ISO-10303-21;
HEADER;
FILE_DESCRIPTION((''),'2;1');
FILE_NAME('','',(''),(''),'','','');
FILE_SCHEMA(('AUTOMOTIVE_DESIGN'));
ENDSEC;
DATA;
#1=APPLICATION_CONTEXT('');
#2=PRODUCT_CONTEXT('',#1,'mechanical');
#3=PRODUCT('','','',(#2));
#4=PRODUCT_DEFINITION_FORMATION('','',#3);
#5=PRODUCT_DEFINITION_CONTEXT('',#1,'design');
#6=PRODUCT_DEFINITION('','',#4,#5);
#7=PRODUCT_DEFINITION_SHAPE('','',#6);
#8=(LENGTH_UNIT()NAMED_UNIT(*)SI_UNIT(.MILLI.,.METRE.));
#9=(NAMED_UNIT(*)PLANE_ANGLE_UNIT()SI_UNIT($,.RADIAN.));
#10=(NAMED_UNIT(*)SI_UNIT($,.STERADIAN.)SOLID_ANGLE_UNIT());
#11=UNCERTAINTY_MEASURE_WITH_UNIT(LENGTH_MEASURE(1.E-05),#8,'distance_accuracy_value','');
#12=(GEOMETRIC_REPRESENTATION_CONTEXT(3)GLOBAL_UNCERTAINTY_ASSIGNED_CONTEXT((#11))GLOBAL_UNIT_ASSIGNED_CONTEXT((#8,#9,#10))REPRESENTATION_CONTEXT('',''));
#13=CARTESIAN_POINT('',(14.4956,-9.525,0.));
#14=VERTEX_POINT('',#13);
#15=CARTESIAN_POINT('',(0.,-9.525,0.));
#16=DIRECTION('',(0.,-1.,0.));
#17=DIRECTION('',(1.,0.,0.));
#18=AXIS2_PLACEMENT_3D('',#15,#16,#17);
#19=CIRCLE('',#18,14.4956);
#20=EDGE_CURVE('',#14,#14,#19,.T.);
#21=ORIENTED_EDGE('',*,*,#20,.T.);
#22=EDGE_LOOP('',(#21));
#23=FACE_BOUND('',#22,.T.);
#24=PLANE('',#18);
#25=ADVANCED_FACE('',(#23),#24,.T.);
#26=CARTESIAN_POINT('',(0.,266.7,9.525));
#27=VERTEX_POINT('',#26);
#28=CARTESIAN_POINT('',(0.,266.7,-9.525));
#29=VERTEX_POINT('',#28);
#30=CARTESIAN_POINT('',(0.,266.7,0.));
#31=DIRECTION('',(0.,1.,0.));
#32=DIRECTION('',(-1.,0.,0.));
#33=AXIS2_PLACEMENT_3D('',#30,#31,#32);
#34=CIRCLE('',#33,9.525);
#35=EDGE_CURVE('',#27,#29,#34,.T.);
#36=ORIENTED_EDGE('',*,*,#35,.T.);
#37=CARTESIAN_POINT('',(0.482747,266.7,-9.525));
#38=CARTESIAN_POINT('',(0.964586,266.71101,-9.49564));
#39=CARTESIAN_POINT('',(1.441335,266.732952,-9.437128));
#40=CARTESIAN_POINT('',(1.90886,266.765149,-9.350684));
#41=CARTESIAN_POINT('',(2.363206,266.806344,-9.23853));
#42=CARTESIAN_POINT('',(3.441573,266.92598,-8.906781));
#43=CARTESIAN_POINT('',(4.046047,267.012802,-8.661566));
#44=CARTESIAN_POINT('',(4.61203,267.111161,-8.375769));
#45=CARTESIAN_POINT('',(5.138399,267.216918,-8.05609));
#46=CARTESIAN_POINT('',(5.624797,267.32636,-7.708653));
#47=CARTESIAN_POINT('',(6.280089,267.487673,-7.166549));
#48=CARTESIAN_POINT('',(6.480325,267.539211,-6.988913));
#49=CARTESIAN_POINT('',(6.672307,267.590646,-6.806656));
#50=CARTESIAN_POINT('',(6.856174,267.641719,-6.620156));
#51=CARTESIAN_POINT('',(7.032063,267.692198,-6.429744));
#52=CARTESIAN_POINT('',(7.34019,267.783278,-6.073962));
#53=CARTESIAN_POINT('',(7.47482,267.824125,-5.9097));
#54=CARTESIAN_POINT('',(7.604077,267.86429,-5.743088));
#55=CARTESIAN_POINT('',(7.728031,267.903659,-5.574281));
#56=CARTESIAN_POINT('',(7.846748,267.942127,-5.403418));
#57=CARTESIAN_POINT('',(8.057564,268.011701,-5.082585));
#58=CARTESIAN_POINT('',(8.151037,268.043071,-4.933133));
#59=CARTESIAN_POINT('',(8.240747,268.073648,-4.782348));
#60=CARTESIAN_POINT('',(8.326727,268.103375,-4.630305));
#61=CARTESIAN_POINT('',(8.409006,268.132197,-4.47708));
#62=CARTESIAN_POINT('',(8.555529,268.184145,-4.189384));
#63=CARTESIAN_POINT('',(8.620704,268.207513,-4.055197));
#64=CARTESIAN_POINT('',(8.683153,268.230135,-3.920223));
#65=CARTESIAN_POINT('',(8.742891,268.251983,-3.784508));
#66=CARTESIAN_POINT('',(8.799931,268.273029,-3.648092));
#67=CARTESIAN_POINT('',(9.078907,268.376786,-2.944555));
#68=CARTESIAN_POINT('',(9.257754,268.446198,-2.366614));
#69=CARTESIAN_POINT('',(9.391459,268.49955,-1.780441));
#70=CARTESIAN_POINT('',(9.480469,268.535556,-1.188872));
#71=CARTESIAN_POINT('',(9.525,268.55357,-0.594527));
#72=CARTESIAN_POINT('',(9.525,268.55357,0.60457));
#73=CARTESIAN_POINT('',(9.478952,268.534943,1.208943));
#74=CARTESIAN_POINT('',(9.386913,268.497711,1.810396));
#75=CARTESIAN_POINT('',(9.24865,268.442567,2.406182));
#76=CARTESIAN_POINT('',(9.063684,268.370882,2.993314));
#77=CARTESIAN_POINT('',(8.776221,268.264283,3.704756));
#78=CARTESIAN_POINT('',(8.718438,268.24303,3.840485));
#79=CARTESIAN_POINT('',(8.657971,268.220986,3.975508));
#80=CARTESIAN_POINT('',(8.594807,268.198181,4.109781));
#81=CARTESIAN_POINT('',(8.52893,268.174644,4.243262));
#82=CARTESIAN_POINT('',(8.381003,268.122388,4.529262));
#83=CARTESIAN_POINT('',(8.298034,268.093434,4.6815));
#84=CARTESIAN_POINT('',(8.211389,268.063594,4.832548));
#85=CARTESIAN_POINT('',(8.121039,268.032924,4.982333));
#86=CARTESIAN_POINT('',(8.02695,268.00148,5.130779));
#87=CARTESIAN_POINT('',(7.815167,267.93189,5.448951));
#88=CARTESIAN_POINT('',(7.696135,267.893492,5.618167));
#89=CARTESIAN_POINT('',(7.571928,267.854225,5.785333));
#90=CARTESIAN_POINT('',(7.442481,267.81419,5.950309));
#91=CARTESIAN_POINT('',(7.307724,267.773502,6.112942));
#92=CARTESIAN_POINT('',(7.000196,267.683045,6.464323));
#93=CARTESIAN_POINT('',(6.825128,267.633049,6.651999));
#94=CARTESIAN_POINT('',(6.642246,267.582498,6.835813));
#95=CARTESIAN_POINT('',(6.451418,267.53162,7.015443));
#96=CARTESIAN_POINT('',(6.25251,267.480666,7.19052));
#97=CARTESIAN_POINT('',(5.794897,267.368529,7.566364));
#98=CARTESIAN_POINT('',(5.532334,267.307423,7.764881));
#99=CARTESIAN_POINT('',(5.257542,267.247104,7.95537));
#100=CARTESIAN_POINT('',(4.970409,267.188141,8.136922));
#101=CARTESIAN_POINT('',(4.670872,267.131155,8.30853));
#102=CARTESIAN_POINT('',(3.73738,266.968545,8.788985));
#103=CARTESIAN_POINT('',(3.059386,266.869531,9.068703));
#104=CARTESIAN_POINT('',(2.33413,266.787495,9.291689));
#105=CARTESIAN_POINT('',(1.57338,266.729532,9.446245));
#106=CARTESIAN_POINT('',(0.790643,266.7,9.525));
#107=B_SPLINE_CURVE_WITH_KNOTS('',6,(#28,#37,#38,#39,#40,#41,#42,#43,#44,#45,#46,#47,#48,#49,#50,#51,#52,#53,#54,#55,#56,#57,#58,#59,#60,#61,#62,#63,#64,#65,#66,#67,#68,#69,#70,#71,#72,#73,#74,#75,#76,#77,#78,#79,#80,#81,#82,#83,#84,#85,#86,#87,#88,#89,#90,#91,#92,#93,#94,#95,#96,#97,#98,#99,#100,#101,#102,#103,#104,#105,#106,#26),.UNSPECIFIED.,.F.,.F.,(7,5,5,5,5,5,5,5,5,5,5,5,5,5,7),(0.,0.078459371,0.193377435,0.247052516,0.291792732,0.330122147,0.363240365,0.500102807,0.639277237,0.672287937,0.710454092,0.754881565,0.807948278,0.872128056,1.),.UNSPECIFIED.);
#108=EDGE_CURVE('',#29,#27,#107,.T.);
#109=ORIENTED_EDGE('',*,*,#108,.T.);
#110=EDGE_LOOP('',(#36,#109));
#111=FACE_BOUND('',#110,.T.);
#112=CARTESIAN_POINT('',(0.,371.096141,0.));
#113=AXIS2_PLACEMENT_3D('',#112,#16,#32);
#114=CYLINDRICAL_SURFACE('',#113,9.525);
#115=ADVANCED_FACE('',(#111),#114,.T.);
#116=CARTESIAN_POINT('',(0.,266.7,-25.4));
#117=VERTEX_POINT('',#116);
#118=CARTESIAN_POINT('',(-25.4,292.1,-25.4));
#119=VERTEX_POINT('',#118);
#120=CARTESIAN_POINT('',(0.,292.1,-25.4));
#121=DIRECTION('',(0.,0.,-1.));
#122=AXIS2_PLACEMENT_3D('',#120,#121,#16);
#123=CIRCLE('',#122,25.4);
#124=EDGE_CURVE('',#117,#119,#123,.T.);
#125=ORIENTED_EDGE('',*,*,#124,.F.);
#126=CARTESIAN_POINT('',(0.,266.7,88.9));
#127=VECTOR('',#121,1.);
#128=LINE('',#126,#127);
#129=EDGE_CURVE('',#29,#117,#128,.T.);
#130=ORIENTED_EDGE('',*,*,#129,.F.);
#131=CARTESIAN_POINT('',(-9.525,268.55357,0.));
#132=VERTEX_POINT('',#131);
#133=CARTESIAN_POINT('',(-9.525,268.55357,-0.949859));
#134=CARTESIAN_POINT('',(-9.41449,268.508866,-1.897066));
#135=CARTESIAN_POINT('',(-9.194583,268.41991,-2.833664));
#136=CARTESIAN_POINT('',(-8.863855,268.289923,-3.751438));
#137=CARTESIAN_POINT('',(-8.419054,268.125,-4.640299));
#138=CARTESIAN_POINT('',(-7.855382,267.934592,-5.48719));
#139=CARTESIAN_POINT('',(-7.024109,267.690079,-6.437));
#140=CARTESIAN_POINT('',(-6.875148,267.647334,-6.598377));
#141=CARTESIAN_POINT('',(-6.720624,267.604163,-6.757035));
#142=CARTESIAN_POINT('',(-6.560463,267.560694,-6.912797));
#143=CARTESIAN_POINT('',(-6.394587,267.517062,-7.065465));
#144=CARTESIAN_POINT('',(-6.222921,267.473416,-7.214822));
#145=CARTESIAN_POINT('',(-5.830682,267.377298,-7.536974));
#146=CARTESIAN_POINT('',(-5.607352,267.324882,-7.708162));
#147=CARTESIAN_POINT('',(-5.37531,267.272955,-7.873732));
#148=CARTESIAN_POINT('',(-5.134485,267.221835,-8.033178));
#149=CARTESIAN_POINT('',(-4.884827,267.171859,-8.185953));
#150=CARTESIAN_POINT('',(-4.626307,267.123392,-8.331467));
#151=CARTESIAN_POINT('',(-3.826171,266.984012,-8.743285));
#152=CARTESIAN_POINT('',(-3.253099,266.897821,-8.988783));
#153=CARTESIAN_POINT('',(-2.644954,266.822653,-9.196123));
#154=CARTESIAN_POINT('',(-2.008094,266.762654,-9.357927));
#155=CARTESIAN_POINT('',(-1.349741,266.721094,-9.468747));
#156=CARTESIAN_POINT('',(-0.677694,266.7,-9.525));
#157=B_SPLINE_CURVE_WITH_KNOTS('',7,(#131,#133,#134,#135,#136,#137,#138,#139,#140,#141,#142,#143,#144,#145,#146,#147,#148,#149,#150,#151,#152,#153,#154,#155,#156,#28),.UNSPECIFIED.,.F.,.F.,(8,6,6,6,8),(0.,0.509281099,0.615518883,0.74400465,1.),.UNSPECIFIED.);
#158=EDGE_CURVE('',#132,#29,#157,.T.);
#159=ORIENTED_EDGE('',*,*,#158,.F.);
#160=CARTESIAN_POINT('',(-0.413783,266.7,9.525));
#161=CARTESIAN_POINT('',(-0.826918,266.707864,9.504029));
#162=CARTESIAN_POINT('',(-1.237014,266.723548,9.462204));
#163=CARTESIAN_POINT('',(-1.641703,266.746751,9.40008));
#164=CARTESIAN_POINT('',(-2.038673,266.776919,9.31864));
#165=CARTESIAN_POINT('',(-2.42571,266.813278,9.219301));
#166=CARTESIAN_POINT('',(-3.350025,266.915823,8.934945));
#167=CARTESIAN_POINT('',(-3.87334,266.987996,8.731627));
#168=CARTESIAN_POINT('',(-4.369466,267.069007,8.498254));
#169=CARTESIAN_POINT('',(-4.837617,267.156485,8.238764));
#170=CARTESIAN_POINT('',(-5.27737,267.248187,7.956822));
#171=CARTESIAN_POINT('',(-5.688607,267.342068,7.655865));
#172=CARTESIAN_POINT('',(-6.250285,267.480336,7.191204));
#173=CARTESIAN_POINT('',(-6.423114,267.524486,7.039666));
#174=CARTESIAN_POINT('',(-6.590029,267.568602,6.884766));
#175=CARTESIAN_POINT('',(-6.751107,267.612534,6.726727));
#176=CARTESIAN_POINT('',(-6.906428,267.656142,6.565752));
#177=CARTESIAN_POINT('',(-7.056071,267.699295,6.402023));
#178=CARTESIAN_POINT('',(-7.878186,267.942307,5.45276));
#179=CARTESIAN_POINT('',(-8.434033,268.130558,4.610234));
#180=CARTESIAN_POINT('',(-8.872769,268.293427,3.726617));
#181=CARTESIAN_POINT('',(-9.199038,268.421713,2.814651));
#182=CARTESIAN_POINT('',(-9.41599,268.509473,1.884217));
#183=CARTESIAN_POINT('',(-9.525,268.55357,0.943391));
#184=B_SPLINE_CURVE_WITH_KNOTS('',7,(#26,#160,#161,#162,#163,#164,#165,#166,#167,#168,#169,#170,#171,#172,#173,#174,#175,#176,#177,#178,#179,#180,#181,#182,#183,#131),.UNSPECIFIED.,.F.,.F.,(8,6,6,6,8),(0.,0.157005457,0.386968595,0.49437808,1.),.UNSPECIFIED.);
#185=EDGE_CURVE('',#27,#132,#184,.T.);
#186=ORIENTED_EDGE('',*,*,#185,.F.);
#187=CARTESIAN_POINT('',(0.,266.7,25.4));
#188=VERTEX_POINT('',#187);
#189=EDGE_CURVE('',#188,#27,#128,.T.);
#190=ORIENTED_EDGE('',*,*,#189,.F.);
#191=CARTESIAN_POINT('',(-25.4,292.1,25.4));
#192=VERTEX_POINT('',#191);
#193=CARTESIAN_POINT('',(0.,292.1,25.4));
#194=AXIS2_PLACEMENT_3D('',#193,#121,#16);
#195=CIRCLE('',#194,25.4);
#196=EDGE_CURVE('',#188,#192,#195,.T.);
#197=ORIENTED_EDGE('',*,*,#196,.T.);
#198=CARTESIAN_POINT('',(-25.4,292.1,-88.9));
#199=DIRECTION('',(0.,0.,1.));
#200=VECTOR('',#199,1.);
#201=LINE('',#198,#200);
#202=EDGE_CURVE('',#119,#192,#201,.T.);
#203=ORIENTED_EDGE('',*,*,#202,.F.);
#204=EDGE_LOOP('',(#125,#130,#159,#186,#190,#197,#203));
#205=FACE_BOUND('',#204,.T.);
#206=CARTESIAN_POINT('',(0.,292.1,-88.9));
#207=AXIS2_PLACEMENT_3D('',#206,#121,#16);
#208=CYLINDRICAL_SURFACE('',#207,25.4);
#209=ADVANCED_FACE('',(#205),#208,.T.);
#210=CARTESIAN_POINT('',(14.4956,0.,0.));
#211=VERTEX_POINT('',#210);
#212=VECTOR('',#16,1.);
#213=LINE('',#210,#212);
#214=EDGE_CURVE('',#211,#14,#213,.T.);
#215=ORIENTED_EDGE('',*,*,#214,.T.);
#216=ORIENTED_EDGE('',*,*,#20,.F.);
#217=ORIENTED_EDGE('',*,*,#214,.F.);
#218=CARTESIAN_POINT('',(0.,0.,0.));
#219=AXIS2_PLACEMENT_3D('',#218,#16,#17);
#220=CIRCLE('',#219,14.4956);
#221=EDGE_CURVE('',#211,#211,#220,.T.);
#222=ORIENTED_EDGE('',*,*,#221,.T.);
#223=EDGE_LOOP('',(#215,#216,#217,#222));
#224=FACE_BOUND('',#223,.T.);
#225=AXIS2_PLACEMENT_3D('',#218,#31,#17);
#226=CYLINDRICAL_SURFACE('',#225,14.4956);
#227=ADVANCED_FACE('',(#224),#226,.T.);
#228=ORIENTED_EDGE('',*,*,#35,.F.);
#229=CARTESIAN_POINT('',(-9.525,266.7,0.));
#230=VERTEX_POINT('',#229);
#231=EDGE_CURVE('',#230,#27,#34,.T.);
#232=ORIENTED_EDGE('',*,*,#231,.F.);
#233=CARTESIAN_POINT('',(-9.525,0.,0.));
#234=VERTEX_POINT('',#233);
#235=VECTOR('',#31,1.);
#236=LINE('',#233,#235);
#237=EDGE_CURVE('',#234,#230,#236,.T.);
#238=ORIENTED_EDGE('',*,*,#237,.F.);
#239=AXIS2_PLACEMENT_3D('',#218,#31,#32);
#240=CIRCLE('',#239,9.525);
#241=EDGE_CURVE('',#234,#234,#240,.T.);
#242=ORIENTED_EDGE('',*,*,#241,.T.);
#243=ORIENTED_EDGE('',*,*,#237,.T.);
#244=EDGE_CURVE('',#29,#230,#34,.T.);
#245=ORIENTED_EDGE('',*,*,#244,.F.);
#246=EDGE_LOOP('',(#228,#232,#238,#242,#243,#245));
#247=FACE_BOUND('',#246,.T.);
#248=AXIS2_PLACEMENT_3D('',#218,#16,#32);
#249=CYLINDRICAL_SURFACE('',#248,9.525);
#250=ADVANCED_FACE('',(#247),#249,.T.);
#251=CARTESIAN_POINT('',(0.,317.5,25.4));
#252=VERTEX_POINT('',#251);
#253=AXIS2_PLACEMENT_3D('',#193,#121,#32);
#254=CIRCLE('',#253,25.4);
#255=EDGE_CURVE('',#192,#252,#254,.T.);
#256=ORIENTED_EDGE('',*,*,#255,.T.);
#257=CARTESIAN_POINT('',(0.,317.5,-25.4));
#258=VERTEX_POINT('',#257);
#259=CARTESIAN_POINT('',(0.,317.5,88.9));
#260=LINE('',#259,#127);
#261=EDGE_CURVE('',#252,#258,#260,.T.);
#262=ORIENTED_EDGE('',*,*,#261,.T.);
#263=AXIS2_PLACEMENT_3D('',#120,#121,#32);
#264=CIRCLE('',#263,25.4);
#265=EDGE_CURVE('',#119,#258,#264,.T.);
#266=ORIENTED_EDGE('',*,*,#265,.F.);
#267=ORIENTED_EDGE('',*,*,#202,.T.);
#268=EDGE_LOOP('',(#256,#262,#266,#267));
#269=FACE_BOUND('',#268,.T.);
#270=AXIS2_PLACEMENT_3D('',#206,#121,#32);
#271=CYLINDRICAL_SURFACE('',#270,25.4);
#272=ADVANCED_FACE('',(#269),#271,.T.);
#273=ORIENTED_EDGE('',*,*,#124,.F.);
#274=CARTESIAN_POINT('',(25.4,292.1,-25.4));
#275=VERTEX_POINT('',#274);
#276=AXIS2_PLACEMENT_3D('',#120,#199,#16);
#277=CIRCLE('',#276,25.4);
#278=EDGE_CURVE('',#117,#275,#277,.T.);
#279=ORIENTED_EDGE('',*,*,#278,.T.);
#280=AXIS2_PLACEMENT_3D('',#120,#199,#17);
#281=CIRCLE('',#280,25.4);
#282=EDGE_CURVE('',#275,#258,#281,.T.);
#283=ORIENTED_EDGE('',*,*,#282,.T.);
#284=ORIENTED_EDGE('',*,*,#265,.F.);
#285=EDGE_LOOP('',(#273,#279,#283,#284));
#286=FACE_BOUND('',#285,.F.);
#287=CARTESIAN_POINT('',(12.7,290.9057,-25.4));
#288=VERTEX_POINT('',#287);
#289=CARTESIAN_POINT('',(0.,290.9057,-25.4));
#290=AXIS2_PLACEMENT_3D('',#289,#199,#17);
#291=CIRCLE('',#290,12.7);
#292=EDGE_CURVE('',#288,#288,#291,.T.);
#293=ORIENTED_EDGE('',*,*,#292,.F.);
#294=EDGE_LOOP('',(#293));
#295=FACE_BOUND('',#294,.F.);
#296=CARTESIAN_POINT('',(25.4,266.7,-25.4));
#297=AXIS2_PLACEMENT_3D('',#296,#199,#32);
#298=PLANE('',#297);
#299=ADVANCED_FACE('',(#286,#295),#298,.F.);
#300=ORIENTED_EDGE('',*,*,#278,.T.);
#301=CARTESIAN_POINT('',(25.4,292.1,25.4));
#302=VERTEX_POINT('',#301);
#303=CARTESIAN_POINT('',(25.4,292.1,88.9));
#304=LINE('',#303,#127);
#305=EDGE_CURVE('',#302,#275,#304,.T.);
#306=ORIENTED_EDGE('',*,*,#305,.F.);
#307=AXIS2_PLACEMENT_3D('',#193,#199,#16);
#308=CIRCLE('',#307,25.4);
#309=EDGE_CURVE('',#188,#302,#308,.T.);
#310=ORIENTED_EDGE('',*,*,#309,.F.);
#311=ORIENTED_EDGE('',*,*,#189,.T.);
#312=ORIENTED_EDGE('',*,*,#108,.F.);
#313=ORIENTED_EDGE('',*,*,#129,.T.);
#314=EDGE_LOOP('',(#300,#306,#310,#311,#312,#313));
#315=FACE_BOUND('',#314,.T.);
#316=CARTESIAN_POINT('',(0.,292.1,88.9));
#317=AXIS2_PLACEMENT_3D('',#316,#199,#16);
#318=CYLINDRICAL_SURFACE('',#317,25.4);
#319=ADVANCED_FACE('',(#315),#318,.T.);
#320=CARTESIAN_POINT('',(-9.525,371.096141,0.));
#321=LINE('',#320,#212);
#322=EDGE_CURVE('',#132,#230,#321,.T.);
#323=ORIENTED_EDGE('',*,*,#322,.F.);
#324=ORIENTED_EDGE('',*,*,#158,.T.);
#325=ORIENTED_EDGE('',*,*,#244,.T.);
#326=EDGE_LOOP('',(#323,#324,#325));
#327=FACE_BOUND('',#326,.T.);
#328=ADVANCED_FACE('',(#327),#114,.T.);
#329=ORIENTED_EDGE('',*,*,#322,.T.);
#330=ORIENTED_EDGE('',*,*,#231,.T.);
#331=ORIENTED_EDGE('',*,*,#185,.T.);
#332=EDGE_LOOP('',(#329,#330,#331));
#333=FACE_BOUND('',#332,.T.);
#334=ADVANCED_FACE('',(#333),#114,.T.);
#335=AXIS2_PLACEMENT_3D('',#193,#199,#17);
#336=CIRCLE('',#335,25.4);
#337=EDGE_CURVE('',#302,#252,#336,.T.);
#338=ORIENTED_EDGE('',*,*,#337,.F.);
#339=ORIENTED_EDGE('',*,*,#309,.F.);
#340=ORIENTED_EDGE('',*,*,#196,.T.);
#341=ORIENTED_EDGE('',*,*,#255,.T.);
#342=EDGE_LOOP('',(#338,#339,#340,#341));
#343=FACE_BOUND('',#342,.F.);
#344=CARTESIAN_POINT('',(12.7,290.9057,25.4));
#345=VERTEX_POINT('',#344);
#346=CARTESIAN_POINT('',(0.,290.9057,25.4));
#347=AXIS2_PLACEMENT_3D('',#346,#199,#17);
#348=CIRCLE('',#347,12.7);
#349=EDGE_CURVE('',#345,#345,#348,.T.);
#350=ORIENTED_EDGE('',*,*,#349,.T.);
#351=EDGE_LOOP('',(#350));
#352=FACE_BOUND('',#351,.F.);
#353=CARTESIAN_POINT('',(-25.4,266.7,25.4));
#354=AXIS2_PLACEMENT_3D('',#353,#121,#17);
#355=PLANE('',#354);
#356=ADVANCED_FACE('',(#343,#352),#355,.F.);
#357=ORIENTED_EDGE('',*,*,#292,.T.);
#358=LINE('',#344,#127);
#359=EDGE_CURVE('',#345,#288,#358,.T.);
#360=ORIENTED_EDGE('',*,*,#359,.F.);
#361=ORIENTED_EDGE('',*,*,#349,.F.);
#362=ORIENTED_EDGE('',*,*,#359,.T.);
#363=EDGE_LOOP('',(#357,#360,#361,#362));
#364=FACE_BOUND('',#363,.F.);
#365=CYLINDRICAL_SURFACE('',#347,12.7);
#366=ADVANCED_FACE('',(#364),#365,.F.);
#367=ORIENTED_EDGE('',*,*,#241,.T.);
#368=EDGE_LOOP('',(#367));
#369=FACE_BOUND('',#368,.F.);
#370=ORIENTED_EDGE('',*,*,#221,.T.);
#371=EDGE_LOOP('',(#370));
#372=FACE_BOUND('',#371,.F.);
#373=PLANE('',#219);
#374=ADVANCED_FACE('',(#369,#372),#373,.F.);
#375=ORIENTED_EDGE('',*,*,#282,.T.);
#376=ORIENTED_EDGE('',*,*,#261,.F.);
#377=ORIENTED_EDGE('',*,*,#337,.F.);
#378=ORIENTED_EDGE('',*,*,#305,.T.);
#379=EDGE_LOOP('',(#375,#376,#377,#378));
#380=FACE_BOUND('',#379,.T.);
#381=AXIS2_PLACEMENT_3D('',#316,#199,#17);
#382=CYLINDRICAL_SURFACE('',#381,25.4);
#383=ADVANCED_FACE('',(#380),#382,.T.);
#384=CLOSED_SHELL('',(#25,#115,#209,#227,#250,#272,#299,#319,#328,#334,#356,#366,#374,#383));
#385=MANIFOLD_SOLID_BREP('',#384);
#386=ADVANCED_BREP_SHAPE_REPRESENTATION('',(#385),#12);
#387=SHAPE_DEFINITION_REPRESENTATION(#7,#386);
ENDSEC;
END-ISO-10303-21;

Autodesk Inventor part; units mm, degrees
ref_plane "YZ Plane" through (0, 0, 0) normal (1, 0, 0) x (0, 1, 0)
ref_plane "XZ Plane" through (0, 0, 0) normal (0, 1, 0) x (-1, 0, 0)
ref_plane "XY Plane" through (0, 0, 0) normal (0, 0, 1) x (1, 0, 0)
sketch "Sketch1" plane through (0, 0, 0) normal (0, 1, 0) x (-1, 0, 0)
  circle A0 centre (0, 0) radius 9.525
  dimension "d0" = 19.05
extrude "Extrusion1" add sketch "Sketch1" along normal blind 266.7
sketch "Sketch2" plane through (0, 266.7, 0) normal (0, 1, 0) x (1, 0, 0)
  line L0 (-25.4, -25.4) -> (25.4, -25.4)
  line L1 (25.4, -25.4) -> (25.4, 25.4)
  line L2 (25.4, 25.4) -> (-25.4, 25.4)
  line L3 (-25.4, 25.4) -> (-25.4, -25.4)
  point P0 (0, 0)
extrude "Extrusion2" add sketch "Sketch2" along normal blind 50.8
sketch "Sketch3" plane through (-25.4, 266.7, 25.4) normal (0, 0, 1) x (1, 0, 0)
  circle A0 centre (25.4, 24.2057) radius 12.7
  point P0 (25.4, -266.7)
  dimension "d6" = 25.4
fillet "Fillet1" radius 25.4 4 edges at (25.4, 317.5, 0) (-25.4, 317.5, 0) (25.4, 266.7, 0) (-25.4, 266.7, 0)
extrude "Extrusion3" cut sketch "Sketch3" against normal blind 90.4875
sketch "Sketch4" plane through (0, 0, 0) normal (0, -1, 0) x (1, 0, 0)
  circle A0 centre (0, 0) radius 14.4956
extrude "Extrusion4" add sketch "Sketch4" along normal blind 9.525
properties part number "piston" material "Aluminum 6061"
